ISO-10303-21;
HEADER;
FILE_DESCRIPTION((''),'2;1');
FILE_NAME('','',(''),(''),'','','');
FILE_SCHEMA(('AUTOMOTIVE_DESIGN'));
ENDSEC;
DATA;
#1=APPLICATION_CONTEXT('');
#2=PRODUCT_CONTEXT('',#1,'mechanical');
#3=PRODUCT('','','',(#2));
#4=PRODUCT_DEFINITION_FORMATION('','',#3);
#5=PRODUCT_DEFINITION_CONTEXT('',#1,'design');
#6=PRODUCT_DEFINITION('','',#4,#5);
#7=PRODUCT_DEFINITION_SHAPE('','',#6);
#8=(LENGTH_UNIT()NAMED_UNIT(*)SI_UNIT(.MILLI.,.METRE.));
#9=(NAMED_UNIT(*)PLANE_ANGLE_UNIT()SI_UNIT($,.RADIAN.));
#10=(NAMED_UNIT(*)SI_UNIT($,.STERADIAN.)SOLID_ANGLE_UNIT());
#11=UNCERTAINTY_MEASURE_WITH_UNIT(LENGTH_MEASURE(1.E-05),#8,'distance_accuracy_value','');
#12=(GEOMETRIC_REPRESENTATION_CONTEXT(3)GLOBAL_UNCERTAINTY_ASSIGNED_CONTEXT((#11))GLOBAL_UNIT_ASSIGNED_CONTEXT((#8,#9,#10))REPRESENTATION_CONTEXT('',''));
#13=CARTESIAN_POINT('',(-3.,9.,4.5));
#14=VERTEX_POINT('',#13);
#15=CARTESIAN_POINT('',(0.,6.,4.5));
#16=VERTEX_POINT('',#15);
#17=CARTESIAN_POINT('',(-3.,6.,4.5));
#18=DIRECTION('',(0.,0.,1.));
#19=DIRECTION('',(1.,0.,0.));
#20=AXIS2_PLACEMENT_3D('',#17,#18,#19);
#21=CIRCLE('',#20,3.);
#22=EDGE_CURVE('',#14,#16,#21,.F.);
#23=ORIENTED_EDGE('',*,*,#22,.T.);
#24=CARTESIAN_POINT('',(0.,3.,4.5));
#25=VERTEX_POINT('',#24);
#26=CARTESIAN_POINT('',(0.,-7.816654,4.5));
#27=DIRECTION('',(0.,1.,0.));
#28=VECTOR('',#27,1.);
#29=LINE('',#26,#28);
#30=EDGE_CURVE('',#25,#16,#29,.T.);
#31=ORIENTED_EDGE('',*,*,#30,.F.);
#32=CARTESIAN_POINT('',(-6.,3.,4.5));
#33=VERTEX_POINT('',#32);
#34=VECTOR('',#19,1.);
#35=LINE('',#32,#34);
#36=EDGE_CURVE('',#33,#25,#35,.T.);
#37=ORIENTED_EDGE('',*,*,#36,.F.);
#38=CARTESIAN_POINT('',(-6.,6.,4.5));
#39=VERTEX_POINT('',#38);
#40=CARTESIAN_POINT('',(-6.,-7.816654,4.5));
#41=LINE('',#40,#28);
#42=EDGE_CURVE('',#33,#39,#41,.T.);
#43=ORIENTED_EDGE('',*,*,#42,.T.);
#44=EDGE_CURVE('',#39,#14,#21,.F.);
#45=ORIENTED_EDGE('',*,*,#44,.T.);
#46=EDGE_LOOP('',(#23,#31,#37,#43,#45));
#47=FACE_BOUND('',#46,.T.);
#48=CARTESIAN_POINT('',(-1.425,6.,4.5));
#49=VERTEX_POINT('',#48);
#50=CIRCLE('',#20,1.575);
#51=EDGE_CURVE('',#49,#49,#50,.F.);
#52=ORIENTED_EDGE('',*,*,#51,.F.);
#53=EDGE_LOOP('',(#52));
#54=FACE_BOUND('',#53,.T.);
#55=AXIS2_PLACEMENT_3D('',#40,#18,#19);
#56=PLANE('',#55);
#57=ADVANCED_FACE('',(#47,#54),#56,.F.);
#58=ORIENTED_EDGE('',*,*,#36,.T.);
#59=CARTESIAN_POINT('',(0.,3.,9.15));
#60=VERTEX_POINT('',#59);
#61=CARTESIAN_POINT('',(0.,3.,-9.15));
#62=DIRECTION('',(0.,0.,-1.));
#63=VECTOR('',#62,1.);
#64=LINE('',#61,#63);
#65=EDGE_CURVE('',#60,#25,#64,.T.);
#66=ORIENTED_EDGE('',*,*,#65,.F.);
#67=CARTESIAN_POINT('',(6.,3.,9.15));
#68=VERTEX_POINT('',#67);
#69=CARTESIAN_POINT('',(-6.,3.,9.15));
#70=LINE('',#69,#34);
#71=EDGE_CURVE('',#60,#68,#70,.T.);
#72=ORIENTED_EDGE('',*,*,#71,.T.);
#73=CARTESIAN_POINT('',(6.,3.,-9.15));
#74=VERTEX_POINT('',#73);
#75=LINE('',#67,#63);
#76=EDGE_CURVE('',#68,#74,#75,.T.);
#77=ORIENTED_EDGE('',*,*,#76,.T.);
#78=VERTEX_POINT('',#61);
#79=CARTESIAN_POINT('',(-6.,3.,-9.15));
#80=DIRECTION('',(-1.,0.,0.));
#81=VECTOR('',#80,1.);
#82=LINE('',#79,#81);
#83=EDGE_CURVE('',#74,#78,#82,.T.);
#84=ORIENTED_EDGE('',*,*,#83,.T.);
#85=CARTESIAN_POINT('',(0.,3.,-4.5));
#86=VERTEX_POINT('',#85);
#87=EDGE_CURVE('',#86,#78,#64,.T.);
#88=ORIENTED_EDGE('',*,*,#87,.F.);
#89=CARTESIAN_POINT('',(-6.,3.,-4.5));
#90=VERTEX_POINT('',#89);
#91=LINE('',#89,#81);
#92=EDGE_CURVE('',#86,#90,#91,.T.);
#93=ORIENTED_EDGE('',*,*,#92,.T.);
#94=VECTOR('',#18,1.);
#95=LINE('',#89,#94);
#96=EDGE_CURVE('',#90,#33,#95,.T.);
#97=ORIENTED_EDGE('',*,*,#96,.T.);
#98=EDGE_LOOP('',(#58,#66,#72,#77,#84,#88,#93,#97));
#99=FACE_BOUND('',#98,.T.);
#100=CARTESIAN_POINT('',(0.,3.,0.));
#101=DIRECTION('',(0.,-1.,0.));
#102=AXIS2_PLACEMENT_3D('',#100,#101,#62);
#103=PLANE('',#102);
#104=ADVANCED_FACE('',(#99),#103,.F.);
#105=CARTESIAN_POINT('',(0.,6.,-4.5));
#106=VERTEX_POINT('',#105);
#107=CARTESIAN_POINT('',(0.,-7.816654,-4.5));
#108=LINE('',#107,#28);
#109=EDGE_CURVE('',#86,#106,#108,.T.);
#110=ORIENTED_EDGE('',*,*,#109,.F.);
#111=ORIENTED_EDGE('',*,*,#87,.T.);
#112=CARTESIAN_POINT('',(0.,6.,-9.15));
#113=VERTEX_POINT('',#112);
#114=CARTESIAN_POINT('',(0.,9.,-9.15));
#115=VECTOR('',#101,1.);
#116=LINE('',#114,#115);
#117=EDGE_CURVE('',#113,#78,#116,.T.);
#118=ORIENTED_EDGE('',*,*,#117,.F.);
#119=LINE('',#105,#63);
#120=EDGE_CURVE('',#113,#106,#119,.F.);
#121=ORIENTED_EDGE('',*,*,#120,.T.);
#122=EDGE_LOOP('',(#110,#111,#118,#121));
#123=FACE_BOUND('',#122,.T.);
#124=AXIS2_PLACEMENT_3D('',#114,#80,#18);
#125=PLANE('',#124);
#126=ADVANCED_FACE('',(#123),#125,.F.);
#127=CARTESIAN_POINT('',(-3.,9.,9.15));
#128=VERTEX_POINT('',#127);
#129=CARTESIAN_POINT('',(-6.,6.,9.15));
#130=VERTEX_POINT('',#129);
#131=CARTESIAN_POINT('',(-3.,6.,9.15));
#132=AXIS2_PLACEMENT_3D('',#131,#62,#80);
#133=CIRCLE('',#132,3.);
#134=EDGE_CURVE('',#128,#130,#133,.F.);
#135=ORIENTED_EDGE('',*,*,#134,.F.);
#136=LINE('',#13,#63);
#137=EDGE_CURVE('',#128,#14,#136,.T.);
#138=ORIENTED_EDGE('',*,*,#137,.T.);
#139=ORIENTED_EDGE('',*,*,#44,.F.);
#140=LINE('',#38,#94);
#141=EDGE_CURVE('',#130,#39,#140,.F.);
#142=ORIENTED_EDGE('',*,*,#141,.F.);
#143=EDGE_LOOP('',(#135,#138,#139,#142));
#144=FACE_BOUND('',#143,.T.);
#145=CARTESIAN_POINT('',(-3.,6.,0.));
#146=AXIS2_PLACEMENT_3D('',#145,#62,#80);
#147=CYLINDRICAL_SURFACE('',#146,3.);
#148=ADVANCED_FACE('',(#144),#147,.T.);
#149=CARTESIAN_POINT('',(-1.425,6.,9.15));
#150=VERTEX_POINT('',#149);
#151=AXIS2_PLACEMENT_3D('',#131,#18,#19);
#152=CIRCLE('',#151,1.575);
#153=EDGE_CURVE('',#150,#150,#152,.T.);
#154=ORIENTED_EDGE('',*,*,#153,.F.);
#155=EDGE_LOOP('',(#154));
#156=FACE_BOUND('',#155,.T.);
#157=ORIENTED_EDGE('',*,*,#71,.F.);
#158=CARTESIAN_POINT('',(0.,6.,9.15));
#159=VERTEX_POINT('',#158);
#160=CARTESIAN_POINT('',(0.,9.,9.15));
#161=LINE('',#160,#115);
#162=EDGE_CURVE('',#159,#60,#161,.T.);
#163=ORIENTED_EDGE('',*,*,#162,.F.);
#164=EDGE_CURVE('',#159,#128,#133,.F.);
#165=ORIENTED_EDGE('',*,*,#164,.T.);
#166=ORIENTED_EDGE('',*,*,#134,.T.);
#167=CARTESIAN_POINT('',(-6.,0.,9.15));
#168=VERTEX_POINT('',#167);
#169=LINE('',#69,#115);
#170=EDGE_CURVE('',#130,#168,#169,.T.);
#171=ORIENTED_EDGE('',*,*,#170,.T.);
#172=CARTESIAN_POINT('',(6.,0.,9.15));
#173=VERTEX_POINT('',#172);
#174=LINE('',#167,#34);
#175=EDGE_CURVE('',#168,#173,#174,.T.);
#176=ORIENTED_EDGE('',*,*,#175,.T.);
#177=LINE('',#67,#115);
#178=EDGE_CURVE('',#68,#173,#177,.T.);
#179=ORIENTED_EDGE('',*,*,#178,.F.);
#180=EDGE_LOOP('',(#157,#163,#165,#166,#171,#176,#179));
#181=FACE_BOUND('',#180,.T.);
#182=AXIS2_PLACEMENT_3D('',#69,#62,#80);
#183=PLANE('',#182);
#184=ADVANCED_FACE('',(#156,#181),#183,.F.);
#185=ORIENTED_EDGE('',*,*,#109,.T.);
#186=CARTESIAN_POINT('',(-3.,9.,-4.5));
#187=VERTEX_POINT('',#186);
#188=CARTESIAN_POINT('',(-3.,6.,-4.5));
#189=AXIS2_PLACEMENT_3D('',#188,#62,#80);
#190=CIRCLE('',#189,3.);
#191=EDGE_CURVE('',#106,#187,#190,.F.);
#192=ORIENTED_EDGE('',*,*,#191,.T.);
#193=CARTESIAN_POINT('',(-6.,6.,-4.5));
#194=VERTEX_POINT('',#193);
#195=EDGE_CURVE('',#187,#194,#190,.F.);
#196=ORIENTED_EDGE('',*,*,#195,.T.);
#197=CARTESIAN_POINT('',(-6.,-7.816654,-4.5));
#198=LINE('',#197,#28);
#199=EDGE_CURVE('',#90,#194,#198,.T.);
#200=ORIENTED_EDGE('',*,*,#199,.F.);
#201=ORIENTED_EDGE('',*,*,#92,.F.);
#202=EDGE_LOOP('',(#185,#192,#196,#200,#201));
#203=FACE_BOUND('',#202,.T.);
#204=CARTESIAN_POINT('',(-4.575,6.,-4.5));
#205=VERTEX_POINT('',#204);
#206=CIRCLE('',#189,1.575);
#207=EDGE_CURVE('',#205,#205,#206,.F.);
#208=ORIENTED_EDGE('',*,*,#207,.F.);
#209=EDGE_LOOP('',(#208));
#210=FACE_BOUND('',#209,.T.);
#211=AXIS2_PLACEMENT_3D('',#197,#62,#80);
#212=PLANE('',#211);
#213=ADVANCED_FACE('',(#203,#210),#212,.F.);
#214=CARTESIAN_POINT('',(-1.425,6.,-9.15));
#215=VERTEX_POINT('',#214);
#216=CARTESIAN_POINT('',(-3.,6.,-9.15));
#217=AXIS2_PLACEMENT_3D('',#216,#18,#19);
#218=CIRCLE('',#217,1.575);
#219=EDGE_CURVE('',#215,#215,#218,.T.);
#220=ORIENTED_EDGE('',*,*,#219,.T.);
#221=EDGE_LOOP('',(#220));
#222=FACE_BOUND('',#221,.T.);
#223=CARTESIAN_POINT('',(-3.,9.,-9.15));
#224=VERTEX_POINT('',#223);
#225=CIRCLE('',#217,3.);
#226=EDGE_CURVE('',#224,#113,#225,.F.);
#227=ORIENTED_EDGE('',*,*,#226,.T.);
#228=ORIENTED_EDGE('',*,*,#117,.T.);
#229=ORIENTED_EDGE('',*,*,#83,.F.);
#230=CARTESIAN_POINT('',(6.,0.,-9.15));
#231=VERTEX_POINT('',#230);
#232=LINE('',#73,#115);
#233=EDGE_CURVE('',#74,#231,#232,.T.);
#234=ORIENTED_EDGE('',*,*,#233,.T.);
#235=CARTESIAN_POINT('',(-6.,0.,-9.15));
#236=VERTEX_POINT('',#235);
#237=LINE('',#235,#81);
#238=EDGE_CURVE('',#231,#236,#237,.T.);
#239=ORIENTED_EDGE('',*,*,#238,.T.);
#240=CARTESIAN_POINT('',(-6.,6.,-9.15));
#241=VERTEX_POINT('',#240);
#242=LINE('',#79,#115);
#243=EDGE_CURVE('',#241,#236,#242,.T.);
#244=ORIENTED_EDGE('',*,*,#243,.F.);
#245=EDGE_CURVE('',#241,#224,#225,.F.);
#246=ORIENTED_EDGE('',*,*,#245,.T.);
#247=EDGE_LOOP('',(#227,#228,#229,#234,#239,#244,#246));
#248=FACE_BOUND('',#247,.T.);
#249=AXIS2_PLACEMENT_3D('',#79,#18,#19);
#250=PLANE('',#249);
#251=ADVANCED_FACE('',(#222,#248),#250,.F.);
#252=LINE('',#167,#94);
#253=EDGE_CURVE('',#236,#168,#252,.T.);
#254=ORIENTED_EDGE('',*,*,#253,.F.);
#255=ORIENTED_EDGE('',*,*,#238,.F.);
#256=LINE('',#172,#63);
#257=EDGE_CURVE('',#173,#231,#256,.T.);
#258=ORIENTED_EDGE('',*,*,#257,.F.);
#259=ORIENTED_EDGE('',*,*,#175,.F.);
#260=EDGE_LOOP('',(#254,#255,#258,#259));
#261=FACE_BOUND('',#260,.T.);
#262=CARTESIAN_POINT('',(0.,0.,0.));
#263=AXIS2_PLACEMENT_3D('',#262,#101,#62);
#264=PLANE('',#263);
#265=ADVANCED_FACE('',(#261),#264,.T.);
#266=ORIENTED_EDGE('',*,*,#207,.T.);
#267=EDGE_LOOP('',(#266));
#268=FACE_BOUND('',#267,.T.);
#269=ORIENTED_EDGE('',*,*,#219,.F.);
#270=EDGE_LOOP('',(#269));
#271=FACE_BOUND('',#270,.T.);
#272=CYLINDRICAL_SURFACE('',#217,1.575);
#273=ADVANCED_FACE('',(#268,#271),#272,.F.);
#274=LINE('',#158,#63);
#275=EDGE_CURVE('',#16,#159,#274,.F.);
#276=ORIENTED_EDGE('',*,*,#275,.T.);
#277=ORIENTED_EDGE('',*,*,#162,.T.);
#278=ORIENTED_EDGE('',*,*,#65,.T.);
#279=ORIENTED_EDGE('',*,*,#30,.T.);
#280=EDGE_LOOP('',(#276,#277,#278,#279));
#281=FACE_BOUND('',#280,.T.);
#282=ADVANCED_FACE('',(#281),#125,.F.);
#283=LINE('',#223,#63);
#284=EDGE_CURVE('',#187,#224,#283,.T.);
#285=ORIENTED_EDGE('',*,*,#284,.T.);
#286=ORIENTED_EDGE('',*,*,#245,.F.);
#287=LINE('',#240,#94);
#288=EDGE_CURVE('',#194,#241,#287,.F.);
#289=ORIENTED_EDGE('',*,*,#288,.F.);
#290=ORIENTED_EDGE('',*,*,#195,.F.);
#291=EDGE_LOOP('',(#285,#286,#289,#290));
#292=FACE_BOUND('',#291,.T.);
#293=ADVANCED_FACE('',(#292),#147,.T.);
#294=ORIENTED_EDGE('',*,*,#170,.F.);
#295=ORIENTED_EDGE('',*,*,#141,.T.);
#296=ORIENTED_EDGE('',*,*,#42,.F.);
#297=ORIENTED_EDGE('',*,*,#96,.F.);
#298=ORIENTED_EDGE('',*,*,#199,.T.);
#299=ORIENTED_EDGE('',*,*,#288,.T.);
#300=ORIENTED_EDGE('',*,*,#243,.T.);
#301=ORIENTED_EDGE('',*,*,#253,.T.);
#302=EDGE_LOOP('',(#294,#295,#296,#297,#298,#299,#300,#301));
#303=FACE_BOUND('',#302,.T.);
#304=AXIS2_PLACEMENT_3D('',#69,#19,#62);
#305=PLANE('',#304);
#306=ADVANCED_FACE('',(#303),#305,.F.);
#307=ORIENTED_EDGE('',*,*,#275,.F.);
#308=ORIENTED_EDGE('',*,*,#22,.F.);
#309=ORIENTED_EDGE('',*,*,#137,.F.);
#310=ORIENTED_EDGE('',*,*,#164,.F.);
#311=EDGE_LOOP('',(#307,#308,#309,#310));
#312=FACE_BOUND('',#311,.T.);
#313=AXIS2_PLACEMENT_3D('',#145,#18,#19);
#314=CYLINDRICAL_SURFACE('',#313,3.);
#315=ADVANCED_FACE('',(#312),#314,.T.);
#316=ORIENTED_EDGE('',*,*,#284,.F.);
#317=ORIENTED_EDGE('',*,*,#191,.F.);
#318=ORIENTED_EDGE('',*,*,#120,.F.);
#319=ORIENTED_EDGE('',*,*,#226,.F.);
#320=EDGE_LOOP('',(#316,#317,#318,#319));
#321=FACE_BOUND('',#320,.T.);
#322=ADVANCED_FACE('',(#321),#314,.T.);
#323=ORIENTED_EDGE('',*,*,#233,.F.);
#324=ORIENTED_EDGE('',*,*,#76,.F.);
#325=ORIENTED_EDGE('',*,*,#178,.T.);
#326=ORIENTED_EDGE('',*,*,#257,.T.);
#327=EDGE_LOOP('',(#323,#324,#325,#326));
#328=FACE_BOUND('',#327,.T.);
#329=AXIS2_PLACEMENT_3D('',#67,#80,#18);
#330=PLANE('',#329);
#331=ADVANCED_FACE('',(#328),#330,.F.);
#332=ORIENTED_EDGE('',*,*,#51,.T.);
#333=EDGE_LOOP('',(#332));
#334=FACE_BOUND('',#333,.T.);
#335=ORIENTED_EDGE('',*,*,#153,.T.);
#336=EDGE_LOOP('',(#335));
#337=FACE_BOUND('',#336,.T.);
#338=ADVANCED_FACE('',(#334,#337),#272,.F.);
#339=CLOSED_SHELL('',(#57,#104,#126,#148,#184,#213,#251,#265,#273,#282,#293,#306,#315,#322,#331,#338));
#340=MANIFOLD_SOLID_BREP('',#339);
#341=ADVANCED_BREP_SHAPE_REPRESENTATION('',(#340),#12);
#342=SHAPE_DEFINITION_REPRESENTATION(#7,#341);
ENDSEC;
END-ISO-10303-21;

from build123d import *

# Parameters (mm, degrees)
SKETCH1_W           = 12
SKETCH1_H           = 18.3
BOSS_EXTRUDE1_DEPTH = 3
SKETCH2_W           = 6
SKETCH2_H           = 18.3
BOSS_EXTRUDE2_DEPTH = 6
SKETCH3_R           = 1.575
CUT_EXTRUDE1_DEPTH  = 22.257704486
SKETCH4_W           = 6
SKETCH4_H           = 9
CUT_EXTRUDE2_DEPTH  = 6
FILLET1_R           = 3


with BuildPart() as part:
    # Sketch1 → Boss-Extrude1 (new body)
    with BuildSketch(Plane(origin=(0, 0, 0), x_dir=(1, 0, 0), z_dir=(0, 1, 0))):
        Rectangle(SKETCH1_W, SKETCH1_H)
    extrude(amount=BOSS_EXTRUDE1_DEPTH)

    # Sketch2 → Boss-Extrude2 (add)
    with BuildSketch(Plane(origin=(0, 3, 0), x_dir=(1, 0, 0), z_dir=(0, 1, 0))):
        with Locations((-3, 0)):
            Rectangle(SKETCH2_W, SKETCH2_H)
    extrude(amount=BOSS_EXTRUDE2_DEPTH)

    # Sketch3 → Cut-Extrude1 (cut, through all)
    with BuildSketch(Plane.XY.offset(9.15)):
        with Locations((-3, 6)):
            Circle(SKETCH3_R)
    extrude(amount=-CUT_EXTRUDE1_DEPTH, mode=Mode.SUBTRACT)

    # Sketch4 → Cut-Extrude2 (cut)
    with BuildSketch(Plane(origin=(0, 9, 0), x_dir=(1, 0, 0), z_dir=(0, 1, 0))):
        with Locations((-3, 0)):
            Rectangle(SKETCH4_W, SKETCH4_H)
    extrude(amount=-CUT_EXTRUDE2_DEPTH, mode=Mode.SUBTRACT)

    # Fillet1
    fillet1_edges = [part.edges().sort_by_distance(p)[0] for p in [
        (-6, 9, 6.825),
        (0, 9, 6.825),
        (-6, 9, -6.825),
        (0, 9, -6.825),
    ]]
    fillet(fillet1_edges, radius=FILLET1_R - 0.0001)  # a hair under: the kernel refuses the full size


solid = part.part
